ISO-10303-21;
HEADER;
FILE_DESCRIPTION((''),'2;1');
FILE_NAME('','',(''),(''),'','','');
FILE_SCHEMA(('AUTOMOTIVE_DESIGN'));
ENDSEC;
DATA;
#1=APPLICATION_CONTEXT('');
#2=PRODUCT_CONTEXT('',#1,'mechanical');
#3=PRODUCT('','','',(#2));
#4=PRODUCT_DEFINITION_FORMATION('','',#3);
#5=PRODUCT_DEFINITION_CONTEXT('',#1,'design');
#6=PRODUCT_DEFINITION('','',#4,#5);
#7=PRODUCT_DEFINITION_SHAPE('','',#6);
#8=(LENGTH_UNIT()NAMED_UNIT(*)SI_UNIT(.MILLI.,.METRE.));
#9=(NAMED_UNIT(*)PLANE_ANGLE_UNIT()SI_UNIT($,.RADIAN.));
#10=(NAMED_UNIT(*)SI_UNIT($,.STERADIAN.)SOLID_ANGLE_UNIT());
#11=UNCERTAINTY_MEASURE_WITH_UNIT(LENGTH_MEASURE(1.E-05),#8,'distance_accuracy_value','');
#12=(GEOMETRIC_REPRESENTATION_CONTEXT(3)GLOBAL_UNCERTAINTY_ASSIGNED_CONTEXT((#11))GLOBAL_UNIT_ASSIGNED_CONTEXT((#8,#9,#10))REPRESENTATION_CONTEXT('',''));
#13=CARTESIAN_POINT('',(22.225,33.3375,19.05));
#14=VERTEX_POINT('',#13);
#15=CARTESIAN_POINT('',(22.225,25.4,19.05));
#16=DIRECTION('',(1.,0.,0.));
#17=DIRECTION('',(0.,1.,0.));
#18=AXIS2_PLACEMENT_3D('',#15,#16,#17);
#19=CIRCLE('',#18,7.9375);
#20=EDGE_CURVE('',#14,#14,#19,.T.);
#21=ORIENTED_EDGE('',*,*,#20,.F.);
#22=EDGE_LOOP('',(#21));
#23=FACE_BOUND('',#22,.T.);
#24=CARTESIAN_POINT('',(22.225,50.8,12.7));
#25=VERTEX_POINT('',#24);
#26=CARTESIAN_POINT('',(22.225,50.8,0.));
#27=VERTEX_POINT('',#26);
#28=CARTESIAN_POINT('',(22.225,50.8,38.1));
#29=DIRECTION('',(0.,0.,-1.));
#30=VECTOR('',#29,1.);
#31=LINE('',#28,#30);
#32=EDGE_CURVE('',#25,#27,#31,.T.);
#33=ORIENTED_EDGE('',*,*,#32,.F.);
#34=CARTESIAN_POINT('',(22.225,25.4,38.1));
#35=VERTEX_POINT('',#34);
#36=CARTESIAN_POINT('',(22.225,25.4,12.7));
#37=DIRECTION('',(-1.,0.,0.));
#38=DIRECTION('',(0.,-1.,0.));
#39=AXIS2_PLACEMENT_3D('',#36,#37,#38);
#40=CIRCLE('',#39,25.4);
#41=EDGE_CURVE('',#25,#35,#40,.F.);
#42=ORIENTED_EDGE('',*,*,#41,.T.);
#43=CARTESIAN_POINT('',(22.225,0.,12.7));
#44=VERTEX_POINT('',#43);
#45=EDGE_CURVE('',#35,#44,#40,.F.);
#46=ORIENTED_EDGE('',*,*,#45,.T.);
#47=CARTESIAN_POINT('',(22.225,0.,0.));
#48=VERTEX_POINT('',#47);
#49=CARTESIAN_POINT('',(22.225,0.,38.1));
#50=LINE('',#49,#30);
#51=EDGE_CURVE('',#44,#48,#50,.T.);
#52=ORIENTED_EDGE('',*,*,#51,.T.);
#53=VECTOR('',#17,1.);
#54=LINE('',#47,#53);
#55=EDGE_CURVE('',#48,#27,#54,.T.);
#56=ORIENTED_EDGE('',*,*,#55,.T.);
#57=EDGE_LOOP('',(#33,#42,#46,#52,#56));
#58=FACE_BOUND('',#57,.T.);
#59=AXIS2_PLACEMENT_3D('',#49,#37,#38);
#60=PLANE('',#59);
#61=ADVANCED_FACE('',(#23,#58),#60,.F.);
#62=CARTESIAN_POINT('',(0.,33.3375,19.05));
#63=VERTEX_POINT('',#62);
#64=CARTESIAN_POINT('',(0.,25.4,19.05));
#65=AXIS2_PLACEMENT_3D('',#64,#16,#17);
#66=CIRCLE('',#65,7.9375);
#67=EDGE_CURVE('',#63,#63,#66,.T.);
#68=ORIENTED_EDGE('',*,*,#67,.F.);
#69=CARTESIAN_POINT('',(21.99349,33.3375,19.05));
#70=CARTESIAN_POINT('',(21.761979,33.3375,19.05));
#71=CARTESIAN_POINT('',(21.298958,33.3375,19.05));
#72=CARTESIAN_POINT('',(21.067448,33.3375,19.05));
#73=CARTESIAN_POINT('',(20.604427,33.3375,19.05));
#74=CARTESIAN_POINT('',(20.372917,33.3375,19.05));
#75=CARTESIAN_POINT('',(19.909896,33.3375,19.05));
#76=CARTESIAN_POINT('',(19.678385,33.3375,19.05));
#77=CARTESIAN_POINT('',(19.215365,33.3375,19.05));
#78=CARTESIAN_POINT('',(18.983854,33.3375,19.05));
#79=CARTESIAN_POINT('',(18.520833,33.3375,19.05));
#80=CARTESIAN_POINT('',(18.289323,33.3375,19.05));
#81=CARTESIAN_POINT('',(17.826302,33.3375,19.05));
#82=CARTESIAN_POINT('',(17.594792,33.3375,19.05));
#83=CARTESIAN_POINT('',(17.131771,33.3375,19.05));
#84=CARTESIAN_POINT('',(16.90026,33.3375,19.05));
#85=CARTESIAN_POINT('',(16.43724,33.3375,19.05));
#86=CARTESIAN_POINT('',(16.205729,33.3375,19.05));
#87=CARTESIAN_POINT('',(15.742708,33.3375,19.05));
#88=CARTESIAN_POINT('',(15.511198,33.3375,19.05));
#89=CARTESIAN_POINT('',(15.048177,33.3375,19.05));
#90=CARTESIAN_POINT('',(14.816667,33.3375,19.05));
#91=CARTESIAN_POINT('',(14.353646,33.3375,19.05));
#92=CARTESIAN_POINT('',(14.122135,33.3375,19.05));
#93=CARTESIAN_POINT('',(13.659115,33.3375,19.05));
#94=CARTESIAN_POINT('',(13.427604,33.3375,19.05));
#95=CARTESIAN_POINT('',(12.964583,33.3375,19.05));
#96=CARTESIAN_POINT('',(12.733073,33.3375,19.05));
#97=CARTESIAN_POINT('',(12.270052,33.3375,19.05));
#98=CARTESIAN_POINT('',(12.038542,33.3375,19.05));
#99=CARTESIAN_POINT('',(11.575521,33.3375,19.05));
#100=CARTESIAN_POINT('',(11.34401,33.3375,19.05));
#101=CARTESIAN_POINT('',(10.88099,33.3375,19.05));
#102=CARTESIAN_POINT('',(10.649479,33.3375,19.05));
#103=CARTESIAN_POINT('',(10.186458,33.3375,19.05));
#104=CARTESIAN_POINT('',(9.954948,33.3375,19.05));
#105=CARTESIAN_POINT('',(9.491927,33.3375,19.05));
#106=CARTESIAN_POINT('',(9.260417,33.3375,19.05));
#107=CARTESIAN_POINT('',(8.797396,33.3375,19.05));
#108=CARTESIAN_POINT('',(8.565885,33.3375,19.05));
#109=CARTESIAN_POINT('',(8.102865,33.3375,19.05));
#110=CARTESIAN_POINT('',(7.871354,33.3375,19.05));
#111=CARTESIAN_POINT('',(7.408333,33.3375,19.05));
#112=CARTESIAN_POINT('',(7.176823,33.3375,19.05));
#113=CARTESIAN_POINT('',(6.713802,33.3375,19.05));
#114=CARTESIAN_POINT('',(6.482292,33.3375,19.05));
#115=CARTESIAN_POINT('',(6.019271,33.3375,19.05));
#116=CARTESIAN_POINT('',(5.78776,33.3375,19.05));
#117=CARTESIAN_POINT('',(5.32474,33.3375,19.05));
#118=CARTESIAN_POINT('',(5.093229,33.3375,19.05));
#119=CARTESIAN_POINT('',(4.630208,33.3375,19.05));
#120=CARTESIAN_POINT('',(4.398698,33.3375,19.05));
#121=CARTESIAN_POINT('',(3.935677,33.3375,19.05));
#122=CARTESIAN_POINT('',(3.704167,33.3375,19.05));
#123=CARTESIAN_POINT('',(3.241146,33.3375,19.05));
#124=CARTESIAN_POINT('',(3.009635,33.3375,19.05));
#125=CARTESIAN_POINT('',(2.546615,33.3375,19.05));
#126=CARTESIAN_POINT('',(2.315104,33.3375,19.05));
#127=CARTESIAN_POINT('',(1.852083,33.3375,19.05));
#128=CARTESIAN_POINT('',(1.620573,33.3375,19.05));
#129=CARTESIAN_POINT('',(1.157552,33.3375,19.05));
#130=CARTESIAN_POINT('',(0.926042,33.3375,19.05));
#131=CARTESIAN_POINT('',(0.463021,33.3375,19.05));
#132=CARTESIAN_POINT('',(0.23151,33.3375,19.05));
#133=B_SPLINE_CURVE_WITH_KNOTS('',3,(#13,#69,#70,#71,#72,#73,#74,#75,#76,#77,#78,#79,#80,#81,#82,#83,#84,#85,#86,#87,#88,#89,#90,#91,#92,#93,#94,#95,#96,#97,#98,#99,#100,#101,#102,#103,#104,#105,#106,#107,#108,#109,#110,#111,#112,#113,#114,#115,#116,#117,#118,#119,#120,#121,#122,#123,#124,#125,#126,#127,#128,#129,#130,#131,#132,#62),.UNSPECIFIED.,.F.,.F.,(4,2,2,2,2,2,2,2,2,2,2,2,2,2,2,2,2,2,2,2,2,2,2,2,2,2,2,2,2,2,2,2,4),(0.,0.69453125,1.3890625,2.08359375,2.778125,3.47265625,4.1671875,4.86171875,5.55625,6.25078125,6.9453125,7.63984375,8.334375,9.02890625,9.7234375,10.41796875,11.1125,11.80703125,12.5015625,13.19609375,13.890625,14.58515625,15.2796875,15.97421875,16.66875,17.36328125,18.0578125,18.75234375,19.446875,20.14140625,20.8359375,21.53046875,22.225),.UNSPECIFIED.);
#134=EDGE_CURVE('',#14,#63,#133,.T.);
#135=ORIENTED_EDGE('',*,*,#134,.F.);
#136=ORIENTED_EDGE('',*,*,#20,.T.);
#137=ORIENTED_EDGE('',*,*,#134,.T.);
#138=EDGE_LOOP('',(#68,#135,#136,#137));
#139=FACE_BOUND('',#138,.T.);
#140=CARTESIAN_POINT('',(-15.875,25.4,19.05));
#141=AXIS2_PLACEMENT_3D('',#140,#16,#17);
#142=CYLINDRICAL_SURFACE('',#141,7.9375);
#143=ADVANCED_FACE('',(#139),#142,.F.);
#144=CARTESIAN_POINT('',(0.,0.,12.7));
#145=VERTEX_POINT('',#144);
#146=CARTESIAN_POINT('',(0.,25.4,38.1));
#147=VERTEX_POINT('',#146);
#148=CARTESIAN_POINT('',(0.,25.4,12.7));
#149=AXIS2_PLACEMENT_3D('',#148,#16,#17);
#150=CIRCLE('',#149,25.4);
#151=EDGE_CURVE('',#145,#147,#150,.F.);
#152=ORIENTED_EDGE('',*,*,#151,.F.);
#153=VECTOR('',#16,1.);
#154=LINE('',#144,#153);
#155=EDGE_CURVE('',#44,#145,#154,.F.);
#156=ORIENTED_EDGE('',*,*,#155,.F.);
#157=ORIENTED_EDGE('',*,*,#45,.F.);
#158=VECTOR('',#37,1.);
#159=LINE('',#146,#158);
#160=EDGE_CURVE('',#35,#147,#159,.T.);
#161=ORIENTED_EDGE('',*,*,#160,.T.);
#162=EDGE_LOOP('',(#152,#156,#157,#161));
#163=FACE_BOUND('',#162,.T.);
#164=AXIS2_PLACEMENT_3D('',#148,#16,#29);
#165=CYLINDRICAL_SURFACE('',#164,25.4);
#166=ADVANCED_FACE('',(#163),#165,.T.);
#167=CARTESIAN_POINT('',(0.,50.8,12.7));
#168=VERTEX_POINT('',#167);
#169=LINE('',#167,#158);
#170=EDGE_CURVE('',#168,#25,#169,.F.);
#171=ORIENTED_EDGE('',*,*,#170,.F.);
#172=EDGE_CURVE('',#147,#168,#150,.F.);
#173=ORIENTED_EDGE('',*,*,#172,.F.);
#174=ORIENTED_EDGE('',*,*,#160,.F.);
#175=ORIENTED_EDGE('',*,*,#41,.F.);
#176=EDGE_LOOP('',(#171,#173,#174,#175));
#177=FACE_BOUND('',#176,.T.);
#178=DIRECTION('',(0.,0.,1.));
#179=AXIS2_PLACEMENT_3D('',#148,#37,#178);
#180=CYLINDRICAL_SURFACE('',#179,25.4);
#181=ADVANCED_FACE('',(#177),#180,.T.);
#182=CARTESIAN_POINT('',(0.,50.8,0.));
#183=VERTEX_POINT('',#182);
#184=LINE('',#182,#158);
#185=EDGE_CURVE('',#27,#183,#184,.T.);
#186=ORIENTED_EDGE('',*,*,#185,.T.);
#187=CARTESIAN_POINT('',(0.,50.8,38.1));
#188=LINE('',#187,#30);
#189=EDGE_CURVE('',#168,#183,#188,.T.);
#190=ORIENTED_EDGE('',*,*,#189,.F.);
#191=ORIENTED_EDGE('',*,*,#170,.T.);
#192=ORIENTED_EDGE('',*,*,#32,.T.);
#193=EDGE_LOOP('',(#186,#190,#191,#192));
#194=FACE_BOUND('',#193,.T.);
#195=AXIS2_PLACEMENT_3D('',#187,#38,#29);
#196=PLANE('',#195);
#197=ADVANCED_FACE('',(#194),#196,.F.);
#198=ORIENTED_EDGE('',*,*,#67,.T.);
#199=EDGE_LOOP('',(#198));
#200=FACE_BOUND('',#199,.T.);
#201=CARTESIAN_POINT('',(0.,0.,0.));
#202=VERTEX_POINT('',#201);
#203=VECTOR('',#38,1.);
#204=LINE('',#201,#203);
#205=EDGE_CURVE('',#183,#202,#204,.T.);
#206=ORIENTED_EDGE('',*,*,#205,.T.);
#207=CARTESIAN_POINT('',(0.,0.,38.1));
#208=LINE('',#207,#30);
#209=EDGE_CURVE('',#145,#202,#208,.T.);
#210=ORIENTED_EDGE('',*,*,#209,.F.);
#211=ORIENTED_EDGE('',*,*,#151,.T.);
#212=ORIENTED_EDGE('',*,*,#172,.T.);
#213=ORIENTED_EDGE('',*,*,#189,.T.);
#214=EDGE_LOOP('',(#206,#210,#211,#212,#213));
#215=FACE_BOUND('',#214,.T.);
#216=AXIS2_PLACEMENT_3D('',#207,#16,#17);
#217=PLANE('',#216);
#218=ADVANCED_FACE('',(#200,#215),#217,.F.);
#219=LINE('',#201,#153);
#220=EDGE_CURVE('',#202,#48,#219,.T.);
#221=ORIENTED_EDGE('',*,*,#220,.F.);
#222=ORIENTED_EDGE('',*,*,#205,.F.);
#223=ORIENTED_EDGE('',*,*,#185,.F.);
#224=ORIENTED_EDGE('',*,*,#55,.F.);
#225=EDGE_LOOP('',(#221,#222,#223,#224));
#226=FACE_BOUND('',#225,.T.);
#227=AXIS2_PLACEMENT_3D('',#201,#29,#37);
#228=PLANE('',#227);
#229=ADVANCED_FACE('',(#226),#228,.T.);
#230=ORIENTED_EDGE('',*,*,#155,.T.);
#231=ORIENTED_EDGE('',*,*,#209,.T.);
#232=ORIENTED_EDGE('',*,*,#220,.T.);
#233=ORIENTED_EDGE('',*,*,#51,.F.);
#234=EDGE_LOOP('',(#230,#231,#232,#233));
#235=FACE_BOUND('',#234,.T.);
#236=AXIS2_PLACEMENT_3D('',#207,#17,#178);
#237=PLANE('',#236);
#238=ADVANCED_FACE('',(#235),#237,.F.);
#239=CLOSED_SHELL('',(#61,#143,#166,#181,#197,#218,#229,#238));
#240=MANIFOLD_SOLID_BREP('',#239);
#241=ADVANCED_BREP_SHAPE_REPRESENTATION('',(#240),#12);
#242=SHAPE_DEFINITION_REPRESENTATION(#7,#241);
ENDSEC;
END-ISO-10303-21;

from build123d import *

# Parameters (mm, degrees)
SKETCH1_W           = 22.225
SKETCH1_H           = 50.8
BOSS_EXTRUDE1_DEPTH = 38.1
FILLET1_R           = 25.4
SKETCH2_R           = 7.9375
CUT_EXTRUDE1_DEPTH  = 38.1


with BuildPart() as part:
    # Sketch1 → Boss-Extrude1 (new body)
    with BuildSketch(Plane.XY):
        with Locations((11.1125, 25.4)):
            Rectangle(SKETCH1_W, SKETCH1_H)
    extrude(amount=BOSS_EXTRUDE1_DEPTH)

    # Fillet1
    fillet1_edges = [part.edges().sort_by_distance(p)[0] for p in [
        (11.1125, 0, 38.1),
        (11.1125, 50.8, 38.1),
    ]]
    fillet(fillet1_edges, radius=FILLET1_R - 0.0001)  # a hair under: the kernel refuses the full size

    # Sketch2 → Cut-Extrude1 (cut)
    with BuildSketch(Plane(origin=(22.225, 0, 0), x_dir=(0, 0, -1), z_dir=(1, 0, 0))):
        with Locations(Location((-19.05, 25.4, 0), (0, 0, 90))):
            Circle(SKETCH2_R)
    extrude(amount=-CUT_EXTRUDE1_DEPTH, mode=Mode.SUBTRACT)


solid = part.part
